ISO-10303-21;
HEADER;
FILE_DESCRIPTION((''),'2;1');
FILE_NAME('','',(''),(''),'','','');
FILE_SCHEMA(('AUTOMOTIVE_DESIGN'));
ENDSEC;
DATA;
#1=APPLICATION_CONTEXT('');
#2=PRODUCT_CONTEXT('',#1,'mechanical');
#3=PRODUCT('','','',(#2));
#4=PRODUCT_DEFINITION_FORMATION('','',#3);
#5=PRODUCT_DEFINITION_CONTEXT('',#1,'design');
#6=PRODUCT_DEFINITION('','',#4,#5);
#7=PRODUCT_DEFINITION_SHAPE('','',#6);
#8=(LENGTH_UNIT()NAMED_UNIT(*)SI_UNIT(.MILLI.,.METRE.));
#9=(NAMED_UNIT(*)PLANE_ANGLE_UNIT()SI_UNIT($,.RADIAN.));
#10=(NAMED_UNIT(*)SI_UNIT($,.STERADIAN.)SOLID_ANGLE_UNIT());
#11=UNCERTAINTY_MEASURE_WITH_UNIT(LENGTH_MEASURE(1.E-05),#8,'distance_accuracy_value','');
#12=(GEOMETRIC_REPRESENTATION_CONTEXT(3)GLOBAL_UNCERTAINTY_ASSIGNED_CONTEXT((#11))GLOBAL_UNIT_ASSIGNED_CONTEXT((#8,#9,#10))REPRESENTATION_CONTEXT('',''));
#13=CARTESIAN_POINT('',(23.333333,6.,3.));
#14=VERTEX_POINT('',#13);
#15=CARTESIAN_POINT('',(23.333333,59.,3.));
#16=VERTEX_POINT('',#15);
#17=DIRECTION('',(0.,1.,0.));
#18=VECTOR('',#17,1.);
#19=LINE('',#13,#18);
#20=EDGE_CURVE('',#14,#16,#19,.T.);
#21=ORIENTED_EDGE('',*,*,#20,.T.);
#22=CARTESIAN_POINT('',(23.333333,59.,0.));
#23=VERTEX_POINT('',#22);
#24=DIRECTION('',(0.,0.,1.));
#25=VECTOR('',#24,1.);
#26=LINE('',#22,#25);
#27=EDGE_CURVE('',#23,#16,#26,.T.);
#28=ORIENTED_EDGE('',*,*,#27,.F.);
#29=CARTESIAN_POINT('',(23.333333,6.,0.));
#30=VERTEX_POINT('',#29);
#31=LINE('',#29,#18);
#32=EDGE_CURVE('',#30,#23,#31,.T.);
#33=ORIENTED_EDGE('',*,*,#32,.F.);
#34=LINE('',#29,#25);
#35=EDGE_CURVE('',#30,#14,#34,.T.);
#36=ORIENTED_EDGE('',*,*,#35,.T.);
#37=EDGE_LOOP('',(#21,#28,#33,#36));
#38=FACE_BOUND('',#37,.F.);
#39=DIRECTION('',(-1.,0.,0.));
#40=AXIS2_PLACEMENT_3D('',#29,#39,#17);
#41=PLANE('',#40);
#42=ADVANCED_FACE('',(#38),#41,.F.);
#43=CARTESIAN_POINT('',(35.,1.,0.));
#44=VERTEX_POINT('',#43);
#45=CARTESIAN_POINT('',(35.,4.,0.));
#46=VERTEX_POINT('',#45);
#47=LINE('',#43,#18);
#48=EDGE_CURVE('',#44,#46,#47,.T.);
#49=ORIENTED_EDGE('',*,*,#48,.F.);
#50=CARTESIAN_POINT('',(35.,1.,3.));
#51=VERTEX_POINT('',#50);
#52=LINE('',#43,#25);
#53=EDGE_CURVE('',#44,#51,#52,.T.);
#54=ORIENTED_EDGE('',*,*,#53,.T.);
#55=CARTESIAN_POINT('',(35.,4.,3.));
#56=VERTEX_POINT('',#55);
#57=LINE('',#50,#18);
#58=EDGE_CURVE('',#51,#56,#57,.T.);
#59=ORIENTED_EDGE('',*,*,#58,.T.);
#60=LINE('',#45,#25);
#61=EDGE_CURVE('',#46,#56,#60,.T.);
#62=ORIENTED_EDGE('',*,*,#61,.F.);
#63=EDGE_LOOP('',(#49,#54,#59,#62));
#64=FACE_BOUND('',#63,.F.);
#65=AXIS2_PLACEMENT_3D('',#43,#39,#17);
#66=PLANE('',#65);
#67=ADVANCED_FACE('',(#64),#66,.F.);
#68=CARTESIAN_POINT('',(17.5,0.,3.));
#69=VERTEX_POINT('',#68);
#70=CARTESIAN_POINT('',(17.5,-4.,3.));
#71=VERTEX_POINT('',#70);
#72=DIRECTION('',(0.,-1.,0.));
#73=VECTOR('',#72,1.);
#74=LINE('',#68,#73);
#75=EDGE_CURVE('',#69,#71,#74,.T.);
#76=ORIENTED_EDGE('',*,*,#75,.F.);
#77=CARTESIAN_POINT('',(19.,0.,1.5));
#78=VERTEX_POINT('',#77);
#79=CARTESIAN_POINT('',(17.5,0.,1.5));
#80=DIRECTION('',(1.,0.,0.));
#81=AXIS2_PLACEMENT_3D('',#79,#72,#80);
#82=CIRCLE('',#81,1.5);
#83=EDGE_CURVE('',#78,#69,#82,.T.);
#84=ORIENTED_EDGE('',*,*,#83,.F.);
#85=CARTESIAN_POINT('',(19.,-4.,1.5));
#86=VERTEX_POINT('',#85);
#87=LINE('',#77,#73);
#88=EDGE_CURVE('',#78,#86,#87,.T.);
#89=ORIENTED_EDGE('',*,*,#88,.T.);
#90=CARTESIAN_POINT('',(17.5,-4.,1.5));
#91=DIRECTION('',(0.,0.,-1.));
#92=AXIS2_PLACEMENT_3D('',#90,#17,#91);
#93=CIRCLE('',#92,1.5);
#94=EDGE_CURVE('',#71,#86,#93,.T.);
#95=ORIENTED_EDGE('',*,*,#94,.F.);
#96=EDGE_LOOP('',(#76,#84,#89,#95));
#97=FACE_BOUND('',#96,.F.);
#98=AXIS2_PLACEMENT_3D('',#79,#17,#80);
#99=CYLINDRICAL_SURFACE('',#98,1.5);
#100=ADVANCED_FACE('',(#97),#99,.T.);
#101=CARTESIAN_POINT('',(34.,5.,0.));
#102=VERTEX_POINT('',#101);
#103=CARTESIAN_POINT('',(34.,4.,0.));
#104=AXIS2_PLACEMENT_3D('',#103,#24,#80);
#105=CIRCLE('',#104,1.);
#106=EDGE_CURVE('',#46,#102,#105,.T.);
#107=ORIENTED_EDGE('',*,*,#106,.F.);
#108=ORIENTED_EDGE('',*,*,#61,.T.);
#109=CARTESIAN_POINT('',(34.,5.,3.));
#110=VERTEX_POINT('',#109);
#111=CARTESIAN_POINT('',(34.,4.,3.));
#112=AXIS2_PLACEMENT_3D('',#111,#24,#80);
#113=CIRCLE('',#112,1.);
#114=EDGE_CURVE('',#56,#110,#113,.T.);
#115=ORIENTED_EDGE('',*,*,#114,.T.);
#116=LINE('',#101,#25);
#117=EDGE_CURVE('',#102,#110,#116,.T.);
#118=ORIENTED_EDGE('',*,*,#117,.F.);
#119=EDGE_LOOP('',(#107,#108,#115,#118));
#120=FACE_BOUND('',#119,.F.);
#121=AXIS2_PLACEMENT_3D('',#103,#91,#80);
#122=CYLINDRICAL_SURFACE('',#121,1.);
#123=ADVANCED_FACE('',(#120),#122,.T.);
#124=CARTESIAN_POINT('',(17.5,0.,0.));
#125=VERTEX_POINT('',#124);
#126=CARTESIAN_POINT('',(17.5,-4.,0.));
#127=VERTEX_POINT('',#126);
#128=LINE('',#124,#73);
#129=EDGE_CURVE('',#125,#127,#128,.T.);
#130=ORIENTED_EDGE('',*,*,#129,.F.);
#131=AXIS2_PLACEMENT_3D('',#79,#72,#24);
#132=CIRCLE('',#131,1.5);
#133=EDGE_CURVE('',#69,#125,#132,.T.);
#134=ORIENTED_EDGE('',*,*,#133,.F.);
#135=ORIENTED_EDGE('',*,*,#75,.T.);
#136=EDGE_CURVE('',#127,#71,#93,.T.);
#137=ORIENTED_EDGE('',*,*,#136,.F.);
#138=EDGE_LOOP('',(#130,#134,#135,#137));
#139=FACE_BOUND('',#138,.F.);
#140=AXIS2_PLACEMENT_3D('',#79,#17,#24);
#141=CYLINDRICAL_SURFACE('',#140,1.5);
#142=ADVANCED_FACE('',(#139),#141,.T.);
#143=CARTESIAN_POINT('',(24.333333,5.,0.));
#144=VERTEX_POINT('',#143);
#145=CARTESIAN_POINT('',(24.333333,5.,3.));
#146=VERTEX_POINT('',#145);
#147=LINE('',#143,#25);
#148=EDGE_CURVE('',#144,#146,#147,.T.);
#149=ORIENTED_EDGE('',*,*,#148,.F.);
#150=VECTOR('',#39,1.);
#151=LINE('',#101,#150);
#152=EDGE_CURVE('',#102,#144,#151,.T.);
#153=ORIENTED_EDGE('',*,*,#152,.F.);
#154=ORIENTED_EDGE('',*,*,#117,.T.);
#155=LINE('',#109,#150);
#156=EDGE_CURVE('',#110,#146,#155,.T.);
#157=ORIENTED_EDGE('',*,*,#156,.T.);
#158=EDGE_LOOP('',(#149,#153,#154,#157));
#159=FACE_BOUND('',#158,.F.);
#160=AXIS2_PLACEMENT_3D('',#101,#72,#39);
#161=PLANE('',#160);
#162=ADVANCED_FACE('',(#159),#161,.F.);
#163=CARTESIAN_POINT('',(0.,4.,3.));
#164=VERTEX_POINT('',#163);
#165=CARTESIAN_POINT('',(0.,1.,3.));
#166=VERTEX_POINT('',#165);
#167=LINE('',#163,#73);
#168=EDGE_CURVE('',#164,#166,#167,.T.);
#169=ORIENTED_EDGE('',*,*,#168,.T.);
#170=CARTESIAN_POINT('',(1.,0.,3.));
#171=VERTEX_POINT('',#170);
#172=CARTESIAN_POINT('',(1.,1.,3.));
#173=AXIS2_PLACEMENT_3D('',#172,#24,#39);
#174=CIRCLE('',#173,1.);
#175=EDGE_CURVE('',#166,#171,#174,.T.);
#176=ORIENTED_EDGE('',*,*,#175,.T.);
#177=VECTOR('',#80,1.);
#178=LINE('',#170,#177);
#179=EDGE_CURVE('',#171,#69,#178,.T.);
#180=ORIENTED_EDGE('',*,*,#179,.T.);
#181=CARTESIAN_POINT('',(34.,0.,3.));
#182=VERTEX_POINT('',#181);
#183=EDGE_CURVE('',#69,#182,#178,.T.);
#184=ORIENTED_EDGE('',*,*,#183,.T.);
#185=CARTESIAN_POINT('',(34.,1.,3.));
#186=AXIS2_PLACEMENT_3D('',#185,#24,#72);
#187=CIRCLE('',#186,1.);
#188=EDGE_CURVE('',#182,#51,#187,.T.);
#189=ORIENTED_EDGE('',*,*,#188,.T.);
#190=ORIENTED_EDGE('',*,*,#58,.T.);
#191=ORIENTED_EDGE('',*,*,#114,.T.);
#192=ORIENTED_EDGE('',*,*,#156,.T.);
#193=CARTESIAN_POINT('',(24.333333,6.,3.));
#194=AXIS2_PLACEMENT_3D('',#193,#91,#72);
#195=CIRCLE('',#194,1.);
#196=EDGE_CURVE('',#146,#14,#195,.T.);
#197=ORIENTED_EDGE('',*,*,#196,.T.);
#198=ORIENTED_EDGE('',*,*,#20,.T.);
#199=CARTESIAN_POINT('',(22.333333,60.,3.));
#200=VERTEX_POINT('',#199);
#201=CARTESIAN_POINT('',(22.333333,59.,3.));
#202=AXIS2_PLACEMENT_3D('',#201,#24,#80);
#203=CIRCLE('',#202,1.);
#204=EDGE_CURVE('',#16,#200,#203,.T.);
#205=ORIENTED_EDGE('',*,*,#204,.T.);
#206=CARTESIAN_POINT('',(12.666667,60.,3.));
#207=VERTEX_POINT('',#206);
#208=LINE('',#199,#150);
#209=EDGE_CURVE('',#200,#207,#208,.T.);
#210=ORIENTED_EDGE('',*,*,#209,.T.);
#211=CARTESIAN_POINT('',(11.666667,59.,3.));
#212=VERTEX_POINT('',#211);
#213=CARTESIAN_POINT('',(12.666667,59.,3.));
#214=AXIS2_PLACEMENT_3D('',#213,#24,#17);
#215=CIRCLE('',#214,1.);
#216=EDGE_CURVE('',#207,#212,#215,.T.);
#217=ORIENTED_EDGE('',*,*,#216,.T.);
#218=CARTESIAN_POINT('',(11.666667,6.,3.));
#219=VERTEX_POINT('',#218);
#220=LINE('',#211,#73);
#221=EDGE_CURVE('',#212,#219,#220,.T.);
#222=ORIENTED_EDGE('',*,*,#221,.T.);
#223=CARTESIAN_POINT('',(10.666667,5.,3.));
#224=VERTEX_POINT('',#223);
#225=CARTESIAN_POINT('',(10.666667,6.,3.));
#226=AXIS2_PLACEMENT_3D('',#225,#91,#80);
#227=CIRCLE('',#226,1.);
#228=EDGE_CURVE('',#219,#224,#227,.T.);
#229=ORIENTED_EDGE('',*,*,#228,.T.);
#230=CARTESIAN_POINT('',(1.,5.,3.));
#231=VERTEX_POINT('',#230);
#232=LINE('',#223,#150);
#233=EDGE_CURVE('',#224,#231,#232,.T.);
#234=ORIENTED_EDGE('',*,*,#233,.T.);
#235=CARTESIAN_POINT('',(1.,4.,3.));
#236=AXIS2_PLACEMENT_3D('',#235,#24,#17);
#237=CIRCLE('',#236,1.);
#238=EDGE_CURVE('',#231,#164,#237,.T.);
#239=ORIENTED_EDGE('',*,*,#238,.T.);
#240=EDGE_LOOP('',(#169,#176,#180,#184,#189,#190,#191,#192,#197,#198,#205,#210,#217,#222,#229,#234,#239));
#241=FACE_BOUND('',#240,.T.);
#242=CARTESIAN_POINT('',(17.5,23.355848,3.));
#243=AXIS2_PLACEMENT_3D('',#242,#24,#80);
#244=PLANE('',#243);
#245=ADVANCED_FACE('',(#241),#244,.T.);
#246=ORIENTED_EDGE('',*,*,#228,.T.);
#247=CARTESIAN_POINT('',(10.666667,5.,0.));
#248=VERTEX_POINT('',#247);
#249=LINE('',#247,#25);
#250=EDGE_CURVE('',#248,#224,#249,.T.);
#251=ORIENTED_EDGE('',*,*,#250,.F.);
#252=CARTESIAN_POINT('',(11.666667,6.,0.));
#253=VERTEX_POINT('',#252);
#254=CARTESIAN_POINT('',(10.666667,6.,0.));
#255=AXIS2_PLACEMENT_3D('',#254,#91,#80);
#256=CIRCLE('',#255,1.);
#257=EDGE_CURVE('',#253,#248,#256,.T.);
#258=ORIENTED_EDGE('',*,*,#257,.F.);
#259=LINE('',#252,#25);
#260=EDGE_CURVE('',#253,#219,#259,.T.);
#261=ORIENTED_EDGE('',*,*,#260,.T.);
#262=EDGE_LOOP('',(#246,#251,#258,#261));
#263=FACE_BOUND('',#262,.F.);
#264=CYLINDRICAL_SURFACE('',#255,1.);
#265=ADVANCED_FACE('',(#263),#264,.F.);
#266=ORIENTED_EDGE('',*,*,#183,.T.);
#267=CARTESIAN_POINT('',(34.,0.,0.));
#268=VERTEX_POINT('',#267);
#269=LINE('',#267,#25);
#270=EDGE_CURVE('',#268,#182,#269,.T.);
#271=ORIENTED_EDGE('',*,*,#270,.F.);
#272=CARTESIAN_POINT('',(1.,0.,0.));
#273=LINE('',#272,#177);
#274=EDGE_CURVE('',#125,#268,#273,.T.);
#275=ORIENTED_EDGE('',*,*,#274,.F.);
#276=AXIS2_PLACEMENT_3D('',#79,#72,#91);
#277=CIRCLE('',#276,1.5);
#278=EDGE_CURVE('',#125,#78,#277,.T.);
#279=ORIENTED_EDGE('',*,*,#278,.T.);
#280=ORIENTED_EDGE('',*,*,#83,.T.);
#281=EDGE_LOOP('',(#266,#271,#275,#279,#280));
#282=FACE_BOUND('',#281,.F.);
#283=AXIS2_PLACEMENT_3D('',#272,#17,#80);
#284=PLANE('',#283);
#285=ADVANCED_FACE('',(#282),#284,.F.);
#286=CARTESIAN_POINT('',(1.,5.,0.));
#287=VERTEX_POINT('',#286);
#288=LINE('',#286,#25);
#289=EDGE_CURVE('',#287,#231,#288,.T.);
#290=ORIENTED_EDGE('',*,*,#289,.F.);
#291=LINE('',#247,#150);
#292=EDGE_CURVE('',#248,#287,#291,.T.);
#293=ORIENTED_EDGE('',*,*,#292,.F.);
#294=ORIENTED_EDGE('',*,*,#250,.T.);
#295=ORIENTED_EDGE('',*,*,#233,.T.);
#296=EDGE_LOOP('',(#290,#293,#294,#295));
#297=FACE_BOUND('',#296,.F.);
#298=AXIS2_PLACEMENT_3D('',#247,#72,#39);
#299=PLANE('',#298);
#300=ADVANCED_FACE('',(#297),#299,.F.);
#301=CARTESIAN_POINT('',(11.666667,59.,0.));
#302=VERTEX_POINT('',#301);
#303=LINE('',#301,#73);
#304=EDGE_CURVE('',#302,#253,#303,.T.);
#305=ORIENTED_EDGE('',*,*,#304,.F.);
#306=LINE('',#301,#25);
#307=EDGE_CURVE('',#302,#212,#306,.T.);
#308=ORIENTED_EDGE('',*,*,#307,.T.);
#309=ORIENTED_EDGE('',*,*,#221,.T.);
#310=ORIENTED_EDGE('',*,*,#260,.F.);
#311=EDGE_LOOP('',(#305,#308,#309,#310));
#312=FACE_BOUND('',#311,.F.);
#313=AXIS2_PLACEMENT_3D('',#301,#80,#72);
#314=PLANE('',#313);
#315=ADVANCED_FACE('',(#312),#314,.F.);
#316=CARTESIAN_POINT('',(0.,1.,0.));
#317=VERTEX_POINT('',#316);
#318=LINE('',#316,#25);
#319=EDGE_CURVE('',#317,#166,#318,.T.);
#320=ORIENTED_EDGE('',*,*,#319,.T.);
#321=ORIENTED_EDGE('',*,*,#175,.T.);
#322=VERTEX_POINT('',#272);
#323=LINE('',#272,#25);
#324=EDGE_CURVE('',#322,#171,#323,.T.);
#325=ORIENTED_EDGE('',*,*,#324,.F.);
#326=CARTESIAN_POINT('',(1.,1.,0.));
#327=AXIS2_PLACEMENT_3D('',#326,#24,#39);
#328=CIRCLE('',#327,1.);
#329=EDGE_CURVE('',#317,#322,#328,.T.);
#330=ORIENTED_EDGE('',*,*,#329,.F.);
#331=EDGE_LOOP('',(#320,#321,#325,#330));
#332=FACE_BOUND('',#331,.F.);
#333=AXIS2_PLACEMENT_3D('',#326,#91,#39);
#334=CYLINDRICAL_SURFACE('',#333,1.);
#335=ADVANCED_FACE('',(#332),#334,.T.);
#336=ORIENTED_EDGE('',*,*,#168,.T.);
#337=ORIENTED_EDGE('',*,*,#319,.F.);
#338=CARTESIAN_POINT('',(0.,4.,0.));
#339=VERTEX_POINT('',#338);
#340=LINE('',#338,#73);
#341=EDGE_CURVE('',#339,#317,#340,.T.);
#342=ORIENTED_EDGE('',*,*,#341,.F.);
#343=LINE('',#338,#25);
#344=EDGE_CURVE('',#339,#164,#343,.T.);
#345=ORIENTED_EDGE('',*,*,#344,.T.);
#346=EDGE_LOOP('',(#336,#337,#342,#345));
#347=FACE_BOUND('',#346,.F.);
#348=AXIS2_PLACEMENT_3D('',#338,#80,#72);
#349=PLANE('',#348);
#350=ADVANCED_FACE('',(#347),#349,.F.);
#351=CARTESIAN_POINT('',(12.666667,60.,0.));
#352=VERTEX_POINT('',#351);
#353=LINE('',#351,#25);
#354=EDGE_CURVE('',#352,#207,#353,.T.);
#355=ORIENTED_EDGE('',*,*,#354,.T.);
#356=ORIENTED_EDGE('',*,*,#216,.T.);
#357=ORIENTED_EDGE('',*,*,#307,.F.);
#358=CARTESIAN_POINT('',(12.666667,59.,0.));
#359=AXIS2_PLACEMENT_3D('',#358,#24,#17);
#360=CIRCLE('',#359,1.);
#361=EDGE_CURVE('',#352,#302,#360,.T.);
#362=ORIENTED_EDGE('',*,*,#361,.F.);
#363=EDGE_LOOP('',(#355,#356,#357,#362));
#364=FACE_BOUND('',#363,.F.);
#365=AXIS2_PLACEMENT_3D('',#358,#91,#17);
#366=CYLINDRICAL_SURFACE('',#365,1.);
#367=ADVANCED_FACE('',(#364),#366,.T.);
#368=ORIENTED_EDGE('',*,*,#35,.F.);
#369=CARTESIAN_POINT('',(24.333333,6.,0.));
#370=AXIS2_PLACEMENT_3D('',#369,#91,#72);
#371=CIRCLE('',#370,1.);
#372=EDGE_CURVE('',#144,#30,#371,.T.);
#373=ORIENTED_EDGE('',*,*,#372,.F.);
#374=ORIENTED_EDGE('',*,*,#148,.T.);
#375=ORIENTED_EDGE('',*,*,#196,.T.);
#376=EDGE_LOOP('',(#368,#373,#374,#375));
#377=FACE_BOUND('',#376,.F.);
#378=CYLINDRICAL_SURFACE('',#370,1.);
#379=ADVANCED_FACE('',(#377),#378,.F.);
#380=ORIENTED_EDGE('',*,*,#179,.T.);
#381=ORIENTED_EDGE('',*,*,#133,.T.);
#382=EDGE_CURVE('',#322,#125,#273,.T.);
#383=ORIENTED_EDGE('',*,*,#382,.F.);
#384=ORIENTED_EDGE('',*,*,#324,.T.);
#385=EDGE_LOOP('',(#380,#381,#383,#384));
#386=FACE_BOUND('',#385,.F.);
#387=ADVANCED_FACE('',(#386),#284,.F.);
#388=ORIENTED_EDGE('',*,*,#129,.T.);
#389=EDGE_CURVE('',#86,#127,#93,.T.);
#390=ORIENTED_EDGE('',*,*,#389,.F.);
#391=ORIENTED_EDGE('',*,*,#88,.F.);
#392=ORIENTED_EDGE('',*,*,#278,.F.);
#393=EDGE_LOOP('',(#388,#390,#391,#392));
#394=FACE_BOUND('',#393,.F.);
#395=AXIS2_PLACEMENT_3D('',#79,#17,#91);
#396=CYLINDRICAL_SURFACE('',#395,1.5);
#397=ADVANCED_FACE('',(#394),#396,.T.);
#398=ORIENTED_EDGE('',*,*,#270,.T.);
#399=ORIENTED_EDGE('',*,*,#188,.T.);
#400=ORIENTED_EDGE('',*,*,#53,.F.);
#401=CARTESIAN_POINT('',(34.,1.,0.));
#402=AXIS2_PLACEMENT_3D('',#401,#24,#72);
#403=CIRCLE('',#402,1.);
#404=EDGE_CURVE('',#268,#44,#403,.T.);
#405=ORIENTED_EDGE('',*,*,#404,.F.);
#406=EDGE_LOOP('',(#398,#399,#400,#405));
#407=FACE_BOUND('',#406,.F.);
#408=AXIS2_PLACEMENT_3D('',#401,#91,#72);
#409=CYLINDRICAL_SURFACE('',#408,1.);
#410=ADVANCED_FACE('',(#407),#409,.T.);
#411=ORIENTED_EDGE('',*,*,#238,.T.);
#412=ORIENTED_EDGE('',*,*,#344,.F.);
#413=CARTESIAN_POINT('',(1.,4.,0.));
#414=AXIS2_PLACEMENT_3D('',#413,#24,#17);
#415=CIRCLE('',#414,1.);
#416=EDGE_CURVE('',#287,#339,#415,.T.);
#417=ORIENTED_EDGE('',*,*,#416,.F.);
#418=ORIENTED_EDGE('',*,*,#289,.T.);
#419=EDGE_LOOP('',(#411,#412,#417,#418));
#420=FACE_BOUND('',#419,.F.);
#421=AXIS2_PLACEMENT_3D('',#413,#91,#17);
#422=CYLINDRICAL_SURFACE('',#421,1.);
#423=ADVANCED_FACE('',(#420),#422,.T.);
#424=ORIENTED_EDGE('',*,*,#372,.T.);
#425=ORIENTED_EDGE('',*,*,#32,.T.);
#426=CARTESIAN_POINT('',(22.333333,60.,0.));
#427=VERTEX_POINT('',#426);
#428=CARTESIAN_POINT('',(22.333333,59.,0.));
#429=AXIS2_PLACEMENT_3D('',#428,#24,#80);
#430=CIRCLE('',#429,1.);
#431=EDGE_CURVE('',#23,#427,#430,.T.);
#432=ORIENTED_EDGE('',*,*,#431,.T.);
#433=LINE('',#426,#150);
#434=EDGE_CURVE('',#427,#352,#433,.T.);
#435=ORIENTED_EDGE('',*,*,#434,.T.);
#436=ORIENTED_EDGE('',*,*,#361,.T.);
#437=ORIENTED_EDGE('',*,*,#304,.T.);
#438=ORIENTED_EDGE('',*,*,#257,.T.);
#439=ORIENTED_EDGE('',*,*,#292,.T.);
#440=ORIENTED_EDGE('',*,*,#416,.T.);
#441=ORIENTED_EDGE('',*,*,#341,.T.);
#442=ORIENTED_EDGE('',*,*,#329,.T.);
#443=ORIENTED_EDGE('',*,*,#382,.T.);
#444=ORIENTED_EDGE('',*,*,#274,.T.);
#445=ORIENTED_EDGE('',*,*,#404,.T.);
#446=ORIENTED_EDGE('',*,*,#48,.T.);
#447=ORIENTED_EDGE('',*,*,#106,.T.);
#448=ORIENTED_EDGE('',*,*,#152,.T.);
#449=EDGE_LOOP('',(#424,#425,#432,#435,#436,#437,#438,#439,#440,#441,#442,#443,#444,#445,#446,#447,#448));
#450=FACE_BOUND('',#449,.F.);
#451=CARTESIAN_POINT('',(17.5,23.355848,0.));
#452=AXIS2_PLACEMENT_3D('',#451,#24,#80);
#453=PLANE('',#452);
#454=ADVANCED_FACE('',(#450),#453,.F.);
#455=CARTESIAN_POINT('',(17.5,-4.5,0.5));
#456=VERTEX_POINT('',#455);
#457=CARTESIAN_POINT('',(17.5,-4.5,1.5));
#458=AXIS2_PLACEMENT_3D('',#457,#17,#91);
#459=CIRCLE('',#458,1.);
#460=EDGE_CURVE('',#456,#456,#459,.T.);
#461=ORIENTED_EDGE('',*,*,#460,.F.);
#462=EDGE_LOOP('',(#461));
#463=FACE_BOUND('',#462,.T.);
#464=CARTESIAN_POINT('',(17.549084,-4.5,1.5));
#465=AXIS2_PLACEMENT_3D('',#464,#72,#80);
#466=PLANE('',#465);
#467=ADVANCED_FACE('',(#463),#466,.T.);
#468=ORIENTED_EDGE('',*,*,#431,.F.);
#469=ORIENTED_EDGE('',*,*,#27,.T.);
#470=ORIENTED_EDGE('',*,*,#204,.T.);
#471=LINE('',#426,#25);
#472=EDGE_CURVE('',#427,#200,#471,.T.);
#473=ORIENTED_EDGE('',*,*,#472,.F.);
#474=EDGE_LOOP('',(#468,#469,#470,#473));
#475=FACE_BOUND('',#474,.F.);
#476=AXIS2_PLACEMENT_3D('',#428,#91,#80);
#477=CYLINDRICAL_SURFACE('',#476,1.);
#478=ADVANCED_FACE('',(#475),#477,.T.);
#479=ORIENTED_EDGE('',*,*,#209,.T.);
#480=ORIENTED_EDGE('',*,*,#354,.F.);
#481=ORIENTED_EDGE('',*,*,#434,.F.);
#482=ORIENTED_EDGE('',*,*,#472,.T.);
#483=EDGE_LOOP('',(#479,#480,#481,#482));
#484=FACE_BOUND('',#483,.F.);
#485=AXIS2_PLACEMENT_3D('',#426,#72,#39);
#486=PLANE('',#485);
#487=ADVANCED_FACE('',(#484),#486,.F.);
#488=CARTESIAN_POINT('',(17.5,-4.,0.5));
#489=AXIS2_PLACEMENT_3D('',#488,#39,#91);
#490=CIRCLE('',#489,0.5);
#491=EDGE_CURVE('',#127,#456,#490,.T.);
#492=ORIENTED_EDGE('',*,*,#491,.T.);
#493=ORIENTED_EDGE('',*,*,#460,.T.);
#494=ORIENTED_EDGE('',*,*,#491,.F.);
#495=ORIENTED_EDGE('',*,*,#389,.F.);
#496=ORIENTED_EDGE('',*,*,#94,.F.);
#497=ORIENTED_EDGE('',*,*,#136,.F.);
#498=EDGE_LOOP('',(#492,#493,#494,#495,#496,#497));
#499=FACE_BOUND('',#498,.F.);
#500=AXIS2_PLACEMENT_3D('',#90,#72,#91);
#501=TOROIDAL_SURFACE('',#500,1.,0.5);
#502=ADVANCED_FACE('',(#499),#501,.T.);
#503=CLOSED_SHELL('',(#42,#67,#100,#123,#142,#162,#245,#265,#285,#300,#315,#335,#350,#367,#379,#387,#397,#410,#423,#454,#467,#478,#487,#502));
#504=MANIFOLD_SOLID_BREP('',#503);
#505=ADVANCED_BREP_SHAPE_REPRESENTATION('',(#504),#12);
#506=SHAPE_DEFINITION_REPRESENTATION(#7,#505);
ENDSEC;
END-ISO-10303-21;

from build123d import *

# Parameters (mm, degrees)
F4_DEPTH = 3
F6_DEPTH = 4.5


# Not quite as in the source:
# - a fillet or chamfer that OpenCascade refuses, or shapes differently, is made with other operations: its cross-section is extruded or revolved along the edge and cut away or added


with BuildPart() as f4:
    # F3 (on Top) → F4 (new body)
    with BuildSketch(Plane.XY):
        with BuildLine():
            ThreePointArc((0, 1), (0.2928932188, 0.2928932188), (1, 0))
            Line((1, 0), (34, 0))
            ThreePointArc((34, 0), (34.7071067812, 0.2928932188), (35, 1))
            Line((35, 1), (35, 4))
            ThreePointArc((35, 4), (34.7071067812, 4.7071067812), (34, 5))
            Line((34, 5), (24.3333333333, 5))
            ThreePointArc((24.3333333333, 5), (23.6262265521, 5.2928932188), (23.3333333333, 6))
            Line((23.3333333333, 6), (23.3333333333, 59))
            ThreePointArc((23.3333333333, 59), (23.0404401145, 59.7071067812), (22.3333333333, 60))
            Line((22.3333333333, 60), (12.6666666667, 60))
            ThreePointArc((12.6666666667, 60), (11.9595598855, 59.7071067812), (11.6666666667, 59))
            Line((11.6666666667, 59), (11.6666666667, 6))
            ThreePointArc((11.6666666667, 6), (11.3737734479, 5.2928932188), (10.6666666667, 5))
            Line((10.6666666667, 5), (1, 5))
            ThreePointArc((1, 5), (0.2928932188, 4.7071067812), (0, 4))
            Line((0, 4), (0, 1))
        make_face()
    extrude(amount=F4_DEPTH)

    # F5 (on face) → F6 (join)
    with BuildSketch(Plane.XZ):
        with BuildLine():
            ThreePointArc((17.5, 0), (18.5606601718, 0.4393398282), (19, 1.5))
            ThreePointArc((19, 1.5), (18.5606601718, 2.5606601718), (17.5, 3))
            ThreePointArc((17.5, 3), (16, 1.5), (17.5, 0))
        make_face()
    extrude(amount=F6_DEPTH)

    # F7: fillet of radius 0.5 on 1 edges, made by hand

    # F7_s1 → F7_t2 (revolve, cut)
    with BuildSketch(Plane.YZ.offset(17.5)):
        with BuildLine():
            ThreePointArc((-4, 0), (-4.3535533906, 0.1464466094), (-4.5, 0.5))
            Line((-4.5, 0.5), (-4.5, 0))
            Line((-4.5, 0), (-4, 0))
        make_face()
    revolve(axis=Axis((17.5, -4.5, 1.5), (0, 1, 0)), mode=Mode.SUBTRACT)


solid = f4.part
